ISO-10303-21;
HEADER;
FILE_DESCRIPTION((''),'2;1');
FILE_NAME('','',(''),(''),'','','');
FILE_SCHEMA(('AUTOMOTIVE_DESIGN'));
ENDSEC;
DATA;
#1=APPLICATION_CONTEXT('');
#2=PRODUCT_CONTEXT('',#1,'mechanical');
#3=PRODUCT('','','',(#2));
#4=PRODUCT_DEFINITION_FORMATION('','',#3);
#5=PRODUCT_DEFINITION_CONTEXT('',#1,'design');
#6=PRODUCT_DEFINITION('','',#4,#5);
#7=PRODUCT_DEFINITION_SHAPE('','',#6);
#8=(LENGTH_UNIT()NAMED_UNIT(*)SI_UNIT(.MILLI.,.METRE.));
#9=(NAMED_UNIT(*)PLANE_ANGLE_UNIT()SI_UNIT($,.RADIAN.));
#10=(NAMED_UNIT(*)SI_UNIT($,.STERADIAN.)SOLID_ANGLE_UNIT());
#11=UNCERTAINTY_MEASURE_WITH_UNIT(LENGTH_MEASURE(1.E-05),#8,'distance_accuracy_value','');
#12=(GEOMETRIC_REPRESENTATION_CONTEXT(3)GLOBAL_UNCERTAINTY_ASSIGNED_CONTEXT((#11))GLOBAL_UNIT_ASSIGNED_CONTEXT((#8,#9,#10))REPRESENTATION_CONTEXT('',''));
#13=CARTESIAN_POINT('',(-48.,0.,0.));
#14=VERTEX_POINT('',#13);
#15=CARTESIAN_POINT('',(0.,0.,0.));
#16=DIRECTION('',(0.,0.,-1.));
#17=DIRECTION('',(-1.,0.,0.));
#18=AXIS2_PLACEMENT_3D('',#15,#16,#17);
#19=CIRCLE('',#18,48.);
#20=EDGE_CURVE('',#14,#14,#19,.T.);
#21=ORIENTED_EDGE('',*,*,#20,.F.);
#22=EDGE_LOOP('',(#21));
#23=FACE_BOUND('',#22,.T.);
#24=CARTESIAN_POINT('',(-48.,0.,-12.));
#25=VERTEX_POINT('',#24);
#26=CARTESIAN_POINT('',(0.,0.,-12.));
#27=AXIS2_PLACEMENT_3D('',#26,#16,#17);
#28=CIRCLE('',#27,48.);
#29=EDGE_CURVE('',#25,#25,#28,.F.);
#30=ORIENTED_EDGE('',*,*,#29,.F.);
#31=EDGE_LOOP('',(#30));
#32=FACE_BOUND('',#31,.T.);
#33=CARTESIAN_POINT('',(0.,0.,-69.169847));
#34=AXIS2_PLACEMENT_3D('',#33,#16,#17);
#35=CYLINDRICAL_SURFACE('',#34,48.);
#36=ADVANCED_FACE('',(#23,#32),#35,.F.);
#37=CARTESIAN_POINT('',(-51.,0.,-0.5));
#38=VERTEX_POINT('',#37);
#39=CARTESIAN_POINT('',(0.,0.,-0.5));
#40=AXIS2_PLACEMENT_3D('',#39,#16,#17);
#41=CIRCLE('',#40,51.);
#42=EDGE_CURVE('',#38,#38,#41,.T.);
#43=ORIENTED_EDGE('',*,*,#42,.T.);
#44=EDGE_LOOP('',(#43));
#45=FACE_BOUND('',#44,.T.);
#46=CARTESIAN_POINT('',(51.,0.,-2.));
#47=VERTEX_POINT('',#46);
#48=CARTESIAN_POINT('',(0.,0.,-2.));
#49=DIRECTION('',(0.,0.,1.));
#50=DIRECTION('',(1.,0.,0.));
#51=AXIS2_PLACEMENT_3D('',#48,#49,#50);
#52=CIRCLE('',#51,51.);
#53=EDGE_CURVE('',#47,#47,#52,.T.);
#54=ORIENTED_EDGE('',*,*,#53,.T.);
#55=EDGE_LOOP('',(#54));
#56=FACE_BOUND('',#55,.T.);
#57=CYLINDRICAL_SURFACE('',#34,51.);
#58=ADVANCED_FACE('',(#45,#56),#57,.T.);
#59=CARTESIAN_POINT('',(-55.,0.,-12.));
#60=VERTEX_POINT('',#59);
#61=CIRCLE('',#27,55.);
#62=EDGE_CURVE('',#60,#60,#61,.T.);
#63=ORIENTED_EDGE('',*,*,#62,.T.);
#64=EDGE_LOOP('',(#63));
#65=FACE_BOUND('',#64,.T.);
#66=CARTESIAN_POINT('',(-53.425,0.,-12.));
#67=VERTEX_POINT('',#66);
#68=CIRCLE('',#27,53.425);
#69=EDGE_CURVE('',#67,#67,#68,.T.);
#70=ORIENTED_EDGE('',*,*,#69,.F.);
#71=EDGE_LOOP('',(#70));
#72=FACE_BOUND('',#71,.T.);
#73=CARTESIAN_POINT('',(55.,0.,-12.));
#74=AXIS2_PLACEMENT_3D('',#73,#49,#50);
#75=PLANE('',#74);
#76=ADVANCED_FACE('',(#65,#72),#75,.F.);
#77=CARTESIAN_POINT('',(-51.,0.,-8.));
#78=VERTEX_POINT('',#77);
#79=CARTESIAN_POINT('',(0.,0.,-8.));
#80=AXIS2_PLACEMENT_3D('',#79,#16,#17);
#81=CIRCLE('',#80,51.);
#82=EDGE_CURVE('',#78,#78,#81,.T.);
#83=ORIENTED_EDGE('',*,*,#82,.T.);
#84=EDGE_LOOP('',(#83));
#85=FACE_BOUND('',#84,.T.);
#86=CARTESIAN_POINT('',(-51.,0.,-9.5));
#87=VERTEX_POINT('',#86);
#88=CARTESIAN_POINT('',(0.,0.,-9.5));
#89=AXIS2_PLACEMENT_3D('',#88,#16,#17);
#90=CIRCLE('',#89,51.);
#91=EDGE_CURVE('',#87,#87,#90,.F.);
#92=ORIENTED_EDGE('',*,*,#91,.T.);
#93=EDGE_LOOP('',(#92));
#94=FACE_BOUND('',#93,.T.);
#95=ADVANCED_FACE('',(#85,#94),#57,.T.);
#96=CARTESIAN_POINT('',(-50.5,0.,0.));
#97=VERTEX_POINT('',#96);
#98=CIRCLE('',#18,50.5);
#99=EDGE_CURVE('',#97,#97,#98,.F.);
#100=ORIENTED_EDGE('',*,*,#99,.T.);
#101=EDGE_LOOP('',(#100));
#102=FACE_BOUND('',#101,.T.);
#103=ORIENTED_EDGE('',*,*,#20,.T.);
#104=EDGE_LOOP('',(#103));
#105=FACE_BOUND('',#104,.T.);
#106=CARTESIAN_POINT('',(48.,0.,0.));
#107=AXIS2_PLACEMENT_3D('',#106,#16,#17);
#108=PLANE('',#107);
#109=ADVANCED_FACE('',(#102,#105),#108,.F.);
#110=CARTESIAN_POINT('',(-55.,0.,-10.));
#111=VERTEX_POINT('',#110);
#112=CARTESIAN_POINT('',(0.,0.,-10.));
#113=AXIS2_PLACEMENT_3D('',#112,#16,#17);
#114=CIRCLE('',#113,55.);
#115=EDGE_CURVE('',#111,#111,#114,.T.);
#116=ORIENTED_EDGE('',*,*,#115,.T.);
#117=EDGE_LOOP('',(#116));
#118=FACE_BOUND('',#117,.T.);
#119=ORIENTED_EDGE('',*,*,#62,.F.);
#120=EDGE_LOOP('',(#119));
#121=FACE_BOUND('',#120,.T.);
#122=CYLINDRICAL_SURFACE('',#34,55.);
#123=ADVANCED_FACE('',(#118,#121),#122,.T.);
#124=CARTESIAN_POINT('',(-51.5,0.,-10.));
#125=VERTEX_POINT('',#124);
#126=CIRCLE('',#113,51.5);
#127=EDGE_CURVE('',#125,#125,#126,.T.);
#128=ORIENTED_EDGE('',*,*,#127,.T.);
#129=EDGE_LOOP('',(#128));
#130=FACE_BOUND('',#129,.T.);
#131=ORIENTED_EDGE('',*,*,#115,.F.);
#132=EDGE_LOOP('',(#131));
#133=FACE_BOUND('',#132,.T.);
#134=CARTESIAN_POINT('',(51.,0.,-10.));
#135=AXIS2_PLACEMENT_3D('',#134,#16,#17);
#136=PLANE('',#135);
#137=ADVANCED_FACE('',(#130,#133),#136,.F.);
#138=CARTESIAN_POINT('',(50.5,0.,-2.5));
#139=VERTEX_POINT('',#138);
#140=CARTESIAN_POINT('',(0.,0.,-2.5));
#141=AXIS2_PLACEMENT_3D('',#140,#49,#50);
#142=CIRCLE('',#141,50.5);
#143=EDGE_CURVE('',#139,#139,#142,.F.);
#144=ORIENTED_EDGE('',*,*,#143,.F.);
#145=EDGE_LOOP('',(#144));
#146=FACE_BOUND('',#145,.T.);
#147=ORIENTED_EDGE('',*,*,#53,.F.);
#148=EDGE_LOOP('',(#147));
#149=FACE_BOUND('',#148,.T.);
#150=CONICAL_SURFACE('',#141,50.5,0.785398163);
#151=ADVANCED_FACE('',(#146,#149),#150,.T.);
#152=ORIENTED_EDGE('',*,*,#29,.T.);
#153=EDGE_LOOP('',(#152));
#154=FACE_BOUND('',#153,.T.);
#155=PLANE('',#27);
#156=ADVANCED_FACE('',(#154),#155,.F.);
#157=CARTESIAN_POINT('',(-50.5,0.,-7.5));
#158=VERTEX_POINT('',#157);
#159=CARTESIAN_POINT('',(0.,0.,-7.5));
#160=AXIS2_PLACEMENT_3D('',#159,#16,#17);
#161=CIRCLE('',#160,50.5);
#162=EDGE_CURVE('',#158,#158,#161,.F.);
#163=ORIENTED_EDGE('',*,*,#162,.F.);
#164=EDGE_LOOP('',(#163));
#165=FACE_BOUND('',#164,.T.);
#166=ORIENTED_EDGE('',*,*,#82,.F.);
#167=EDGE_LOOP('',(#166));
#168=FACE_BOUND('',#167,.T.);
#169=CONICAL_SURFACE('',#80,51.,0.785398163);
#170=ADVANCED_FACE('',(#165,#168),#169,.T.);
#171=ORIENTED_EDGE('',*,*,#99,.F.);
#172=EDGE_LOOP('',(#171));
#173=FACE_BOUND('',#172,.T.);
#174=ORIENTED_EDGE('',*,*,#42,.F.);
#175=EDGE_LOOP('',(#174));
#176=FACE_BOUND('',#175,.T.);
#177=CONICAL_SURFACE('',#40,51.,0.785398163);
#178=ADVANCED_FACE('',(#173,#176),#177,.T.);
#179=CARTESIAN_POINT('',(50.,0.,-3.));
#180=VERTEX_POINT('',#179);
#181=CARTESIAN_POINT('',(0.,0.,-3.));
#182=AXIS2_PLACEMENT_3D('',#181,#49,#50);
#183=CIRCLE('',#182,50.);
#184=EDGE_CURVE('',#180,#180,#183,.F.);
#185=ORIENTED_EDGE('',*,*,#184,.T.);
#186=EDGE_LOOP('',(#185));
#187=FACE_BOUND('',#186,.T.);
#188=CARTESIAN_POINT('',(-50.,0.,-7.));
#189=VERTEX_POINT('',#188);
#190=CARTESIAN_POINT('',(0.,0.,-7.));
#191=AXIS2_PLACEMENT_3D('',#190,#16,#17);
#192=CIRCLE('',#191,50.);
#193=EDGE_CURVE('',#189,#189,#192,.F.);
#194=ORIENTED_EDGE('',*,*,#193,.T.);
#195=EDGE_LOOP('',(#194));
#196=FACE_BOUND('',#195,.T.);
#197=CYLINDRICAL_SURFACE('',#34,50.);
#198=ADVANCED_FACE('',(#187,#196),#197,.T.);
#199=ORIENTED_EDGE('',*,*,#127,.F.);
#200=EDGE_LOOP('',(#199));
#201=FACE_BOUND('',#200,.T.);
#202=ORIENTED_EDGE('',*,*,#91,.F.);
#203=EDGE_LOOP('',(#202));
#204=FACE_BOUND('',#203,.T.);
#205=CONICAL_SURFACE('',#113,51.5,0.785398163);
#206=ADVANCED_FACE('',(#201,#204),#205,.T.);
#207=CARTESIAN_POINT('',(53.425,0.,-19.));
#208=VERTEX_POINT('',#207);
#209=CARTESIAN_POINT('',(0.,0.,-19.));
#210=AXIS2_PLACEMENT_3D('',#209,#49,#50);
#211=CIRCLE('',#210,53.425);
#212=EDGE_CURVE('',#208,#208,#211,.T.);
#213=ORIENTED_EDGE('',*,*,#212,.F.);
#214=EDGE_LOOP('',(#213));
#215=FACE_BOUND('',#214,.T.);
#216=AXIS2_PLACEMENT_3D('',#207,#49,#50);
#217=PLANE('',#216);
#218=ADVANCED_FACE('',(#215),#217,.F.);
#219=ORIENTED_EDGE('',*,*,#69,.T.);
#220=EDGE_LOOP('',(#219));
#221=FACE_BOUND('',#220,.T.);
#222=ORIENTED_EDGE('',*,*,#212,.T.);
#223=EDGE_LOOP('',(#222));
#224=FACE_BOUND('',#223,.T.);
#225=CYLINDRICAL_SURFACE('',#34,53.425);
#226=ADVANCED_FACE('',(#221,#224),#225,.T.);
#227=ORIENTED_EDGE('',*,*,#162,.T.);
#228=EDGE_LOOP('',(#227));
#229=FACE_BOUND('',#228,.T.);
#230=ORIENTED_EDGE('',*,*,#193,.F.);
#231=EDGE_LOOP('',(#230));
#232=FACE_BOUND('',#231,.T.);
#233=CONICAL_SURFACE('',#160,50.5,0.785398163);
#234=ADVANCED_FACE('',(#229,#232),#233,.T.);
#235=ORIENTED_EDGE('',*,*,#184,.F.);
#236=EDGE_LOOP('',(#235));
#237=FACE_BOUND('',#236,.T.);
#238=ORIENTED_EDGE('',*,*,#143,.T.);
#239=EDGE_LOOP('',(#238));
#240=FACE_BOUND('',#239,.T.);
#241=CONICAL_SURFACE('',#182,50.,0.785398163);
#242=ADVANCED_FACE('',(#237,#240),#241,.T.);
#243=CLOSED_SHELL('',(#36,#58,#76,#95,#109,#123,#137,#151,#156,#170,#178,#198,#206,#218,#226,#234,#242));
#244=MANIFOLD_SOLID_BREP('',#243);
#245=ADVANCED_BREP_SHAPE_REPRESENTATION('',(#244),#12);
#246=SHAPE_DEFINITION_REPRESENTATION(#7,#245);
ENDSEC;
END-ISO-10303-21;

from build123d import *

# Parameters (mm, degrees)
CHAMFER1_SIZE       = 0.5
BOSS_EXTRUDE1_START = 7
SKETCH2_R           = 53.425
BOSS_EXTRUDE1_DEPTH = 7


with BuildPart() as part:
    # Sketch1 → Revolve1 (revolve)
    with BuildSketch(Plane(origin=(0, 0, 0), x_dir=(1, 0, 0), z_dir=(0, 1, 0)), mode=Mode.PRIVATE) as revolve1_sk:
        Polygon((50.425, 19), (50.425, 14), (48, 14), (48, 0), (51, 0), (51, 2.5), (50, 2.5), (50, 7.5), (51, 7.5), (51, 10), (55, 10), (55, 12), (53.425, 12), (53.425, 19), align=None)
    revolve(revolve1_sk.sketch.rotate(Axis((0, 0, -69.169847328), (0, 0, 1)), 180), axis=Axis((0, 0, -69.169847328), (0, 0, 1)))

    # Chamfer1
    chamfer1_edges = [part.edges().sort_by_distance(p)[0] for p in [
        (51, 0, -10),
        (51, 0, -7.5),
        (50, 0, -7.5),
        (50, 0, -2.5),
        (51, 0, -2.5),
        (51, 0, 0),
        (50.425, 0, -19),
        (53.425, 0, -19),
    ]]
    chamfer(chamfer1_edges, length=CHAMFER1_SIZE - 0.0001)  # a hair under: the kernel refuses the full size

    # Sketch2 → Boss-Extrude1 (add)
    with BuildSketch(Plane(origin=(0, 0, -12), x_dir=(-1, 0, 0), z_dir=(0, 0, -1)).offset(BOSS_EXTRUDE1_START)):
        Circle(SKETCH2_R)
    extrude(amount=-BOSS_EXTRUDE1_DEPTH)


solid = part.part
